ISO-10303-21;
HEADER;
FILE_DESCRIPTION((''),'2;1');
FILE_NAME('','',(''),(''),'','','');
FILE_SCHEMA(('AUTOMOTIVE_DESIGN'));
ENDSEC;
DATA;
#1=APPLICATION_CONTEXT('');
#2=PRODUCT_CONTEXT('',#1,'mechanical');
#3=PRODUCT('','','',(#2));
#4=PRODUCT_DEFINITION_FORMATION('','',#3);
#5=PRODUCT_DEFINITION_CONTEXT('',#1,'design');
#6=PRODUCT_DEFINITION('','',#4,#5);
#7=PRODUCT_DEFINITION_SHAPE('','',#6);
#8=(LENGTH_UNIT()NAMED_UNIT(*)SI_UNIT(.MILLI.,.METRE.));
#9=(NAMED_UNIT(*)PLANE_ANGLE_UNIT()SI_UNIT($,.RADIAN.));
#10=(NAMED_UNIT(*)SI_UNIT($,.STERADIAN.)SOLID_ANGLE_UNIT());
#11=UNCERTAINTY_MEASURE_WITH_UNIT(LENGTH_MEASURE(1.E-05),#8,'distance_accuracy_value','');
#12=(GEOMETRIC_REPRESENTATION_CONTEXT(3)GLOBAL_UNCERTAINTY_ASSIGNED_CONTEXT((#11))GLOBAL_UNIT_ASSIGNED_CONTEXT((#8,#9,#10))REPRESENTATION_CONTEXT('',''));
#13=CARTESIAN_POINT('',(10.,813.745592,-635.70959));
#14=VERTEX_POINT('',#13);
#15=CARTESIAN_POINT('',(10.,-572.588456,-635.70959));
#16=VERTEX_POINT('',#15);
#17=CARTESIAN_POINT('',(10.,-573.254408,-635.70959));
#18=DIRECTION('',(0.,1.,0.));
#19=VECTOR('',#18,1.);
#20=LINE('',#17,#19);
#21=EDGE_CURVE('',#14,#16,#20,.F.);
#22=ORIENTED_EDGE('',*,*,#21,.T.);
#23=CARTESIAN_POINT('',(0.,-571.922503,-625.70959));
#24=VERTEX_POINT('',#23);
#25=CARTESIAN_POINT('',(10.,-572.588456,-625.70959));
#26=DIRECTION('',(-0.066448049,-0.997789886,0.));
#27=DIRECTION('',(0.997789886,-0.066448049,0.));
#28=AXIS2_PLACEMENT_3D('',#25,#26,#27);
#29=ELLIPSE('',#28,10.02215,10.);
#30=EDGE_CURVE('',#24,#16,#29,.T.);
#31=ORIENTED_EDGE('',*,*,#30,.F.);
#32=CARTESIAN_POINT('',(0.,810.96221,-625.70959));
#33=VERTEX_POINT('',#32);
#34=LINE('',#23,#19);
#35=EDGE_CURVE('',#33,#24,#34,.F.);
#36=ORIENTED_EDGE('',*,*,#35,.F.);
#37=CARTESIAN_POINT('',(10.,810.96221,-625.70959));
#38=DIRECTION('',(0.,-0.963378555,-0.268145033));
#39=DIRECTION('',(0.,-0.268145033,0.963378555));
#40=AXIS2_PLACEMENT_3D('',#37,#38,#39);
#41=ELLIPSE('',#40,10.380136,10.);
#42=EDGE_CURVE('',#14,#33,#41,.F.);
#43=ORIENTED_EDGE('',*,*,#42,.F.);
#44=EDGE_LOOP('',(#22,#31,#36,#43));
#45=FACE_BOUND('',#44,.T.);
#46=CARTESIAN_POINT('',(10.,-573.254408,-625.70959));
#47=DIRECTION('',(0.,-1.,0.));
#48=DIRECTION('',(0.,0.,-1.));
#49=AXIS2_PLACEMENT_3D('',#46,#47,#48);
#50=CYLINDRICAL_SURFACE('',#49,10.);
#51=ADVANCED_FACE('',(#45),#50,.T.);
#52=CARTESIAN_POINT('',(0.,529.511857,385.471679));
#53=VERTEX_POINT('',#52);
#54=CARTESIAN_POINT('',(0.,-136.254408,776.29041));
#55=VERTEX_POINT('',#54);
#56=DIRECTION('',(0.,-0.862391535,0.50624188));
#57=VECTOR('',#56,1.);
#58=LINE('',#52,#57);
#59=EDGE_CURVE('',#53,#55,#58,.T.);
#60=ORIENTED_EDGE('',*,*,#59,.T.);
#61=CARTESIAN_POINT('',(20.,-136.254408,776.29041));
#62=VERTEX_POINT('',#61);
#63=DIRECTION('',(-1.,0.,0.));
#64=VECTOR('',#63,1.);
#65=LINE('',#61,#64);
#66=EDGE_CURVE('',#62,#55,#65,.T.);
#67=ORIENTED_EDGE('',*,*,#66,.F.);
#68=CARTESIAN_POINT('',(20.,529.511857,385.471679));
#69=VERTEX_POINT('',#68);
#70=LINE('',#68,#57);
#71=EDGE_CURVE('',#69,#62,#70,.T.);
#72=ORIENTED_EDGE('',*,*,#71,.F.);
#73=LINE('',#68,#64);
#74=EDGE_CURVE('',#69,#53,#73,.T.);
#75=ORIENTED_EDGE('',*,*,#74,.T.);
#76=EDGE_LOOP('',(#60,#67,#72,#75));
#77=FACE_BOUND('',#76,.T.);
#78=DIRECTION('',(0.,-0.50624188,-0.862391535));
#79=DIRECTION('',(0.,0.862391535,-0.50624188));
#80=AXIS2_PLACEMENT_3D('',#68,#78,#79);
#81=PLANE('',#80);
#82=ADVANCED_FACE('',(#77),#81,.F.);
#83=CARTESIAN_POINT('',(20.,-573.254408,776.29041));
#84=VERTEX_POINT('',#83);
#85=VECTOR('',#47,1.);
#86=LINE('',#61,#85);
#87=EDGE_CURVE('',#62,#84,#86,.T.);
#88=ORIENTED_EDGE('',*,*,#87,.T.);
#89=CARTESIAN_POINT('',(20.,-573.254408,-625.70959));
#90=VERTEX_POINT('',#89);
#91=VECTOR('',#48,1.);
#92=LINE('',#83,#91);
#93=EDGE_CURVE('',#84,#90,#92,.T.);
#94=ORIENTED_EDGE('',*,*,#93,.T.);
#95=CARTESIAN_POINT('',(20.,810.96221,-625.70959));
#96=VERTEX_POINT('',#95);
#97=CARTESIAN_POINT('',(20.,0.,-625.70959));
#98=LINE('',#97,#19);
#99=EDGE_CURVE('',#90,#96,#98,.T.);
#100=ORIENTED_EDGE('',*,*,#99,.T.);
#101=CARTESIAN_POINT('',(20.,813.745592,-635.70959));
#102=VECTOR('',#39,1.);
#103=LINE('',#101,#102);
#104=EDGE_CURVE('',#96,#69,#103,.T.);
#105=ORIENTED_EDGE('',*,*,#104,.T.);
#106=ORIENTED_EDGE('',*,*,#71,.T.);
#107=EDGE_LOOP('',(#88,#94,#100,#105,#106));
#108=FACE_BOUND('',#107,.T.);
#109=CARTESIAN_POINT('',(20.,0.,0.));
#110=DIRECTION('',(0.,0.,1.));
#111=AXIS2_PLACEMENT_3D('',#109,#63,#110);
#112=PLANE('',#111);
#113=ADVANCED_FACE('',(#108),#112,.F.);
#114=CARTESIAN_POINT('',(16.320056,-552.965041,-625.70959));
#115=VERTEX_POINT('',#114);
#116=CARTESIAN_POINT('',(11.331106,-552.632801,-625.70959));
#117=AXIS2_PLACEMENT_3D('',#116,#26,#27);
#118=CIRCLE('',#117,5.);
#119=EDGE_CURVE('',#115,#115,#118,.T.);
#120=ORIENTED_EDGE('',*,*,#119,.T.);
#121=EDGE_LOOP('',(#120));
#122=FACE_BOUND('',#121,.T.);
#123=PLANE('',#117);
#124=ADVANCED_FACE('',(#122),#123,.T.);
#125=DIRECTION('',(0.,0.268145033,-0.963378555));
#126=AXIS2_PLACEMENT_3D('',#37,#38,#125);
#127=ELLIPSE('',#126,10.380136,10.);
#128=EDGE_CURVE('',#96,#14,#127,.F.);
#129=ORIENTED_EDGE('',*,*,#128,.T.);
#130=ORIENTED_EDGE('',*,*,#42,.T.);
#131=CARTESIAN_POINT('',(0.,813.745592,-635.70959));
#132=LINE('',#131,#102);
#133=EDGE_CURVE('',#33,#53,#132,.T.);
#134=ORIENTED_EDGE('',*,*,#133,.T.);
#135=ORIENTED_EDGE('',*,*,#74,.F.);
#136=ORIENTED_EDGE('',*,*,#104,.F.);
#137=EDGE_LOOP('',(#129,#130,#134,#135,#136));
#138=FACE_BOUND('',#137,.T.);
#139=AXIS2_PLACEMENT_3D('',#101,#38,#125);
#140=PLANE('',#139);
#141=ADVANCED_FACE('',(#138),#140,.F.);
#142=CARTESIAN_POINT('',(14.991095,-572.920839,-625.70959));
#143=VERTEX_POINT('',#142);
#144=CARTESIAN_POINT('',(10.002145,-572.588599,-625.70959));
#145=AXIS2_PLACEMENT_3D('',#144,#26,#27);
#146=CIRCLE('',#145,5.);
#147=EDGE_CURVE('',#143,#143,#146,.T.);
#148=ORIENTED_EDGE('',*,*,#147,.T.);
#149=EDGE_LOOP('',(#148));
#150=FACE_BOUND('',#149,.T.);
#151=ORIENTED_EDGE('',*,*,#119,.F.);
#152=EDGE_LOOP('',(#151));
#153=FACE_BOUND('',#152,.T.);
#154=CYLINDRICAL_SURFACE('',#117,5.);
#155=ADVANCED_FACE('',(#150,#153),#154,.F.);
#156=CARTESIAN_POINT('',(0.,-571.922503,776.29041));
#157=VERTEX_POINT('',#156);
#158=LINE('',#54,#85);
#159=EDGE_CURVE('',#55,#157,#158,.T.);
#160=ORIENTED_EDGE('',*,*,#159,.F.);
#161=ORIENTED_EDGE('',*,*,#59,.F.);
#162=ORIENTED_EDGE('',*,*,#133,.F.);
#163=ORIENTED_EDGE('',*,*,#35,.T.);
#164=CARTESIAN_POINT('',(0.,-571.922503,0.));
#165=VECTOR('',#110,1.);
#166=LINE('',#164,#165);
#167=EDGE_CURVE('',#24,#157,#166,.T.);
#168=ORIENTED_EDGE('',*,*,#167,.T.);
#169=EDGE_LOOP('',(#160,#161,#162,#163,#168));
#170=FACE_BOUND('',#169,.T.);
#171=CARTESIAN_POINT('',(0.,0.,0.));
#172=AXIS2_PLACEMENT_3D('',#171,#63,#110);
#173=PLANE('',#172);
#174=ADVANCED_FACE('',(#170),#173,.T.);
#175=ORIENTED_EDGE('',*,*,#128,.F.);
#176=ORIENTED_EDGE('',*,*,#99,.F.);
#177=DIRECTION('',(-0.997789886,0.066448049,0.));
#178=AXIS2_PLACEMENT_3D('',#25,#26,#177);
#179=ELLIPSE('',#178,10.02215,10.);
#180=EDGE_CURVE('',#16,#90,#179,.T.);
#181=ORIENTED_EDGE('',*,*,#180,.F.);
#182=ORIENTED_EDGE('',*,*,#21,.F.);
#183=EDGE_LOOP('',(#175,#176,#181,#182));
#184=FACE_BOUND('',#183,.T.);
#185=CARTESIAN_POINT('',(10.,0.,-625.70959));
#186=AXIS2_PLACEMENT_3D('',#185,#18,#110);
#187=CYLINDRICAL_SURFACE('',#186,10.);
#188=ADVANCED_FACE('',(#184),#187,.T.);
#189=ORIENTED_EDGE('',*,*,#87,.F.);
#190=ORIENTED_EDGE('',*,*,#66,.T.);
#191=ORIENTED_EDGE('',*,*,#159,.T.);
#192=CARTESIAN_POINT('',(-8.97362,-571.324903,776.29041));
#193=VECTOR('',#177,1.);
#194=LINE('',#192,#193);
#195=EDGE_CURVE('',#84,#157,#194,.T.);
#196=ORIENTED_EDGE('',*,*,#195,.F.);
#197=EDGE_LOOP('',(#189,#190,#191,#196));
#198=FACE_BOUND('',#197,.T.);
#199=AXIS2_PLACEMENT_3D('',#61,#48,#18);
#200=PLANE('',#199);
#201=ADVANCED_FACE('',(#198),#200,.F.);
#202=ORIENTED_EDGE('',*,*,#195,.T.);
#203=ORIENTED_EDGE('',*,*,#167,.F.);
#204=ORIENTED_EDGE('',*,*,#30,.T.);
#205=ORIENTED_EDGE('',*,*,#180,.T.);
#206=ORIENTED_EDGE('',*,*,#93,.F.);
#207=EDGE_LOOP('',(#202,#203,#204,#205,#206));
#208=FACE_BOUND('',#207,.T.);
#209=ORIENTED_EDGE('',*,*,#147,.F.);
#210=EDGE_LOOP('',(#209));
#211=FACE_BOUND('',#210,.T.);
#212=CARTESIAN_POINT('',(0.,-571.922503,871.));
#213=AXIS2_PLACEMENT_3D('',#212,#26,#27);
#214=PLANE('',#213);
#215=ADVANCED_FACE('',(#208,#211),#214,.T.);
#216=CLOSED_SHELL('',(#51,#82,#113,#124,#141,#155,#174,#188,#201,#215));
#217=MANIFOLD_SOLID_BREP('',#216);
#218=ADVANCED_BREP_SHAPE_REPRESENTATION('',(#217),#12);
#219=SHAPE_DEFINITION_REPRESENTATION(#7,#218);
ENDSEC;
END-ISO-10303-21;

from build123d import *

# Parameters (mm, degrees)
BOSS_EXTRU_1_DEPTH           = 20
ENL_V_MAT_EXTRU_1_DEPTH      = 871
ENL_V_MAT_EXTRU_1_DEPTH_BACK = 792
ESQUISSE5_R                  = 5
ENL_V_MAT_EXTRU_2_DEPTH      = 20
CONG_1_R                     = 10


with BuildPart() as part:
    # Esquisse1 → Boss.-Extru.1 (new body)
    with BuildSketch(Plane(origin=(0, 0, 0), x_dir=(0, 0, -1), z_dir=(1, 0, 0))):
        Polygon((635.709590149, 813.74559194), (-385.471678665, 529.511856746), (-776.290409851, -136.25440806), (-776.290409851, -573.25440806), (635.709590149, -573.25440806), align=None)
    extrude(amount=BOSS_EXTRU_1_DEPTH)

    # Esquisse4 → Enlèv. mat.-Extru.1 (cut, two sides: drawn at the far end of the back side and taken through both)
    with BuildSketch(Plane.XY.offset(-ENL_V_MAT_EXTRU_1_DEPTH_BACK)):
        Polygon((0, -573.25440806), (0, -571.922503428), (20, -573.25440806), align=None)
    extrude(amount=ENL_V_MAT_EXTRU_1_DEPTH + ENL_V_MAT_EXTRU_1_DEPTH_BACK, mode=Mode.SUBTRACT)

    # Esquisse5 → Enlèv. mat.-Extru.2 (cut)
    with BuildSketch(Plane(origin=(-37.919143048, -569.397269313, 0), x_dir=(0.9977898861170226, -0.06644804859873017, 0), z_dir=(-0.06644804859873017, -0.9977898861170226, 0))):
        with Locations((48.027434489, -625.709590149)):
            Circle(ESQUISSE5_R)
    extrude(amount=-ENL_V_MAT_EXTRU_2_DEPTH, mode=Mode.SUBTRACT)

    # Congé1
    cong_1_edges = [part.edges().sort_by_distance(p)[0] for p in [
        (0, 120.911544256, -635.709590149),
        (20, 120.24559194, -635.709590149),
    ]]
    fillet(cong_1_edges, radius=CONG_1_R - 0.0001)  # a hair under: the kernel refuses the full size


solid = part.part
